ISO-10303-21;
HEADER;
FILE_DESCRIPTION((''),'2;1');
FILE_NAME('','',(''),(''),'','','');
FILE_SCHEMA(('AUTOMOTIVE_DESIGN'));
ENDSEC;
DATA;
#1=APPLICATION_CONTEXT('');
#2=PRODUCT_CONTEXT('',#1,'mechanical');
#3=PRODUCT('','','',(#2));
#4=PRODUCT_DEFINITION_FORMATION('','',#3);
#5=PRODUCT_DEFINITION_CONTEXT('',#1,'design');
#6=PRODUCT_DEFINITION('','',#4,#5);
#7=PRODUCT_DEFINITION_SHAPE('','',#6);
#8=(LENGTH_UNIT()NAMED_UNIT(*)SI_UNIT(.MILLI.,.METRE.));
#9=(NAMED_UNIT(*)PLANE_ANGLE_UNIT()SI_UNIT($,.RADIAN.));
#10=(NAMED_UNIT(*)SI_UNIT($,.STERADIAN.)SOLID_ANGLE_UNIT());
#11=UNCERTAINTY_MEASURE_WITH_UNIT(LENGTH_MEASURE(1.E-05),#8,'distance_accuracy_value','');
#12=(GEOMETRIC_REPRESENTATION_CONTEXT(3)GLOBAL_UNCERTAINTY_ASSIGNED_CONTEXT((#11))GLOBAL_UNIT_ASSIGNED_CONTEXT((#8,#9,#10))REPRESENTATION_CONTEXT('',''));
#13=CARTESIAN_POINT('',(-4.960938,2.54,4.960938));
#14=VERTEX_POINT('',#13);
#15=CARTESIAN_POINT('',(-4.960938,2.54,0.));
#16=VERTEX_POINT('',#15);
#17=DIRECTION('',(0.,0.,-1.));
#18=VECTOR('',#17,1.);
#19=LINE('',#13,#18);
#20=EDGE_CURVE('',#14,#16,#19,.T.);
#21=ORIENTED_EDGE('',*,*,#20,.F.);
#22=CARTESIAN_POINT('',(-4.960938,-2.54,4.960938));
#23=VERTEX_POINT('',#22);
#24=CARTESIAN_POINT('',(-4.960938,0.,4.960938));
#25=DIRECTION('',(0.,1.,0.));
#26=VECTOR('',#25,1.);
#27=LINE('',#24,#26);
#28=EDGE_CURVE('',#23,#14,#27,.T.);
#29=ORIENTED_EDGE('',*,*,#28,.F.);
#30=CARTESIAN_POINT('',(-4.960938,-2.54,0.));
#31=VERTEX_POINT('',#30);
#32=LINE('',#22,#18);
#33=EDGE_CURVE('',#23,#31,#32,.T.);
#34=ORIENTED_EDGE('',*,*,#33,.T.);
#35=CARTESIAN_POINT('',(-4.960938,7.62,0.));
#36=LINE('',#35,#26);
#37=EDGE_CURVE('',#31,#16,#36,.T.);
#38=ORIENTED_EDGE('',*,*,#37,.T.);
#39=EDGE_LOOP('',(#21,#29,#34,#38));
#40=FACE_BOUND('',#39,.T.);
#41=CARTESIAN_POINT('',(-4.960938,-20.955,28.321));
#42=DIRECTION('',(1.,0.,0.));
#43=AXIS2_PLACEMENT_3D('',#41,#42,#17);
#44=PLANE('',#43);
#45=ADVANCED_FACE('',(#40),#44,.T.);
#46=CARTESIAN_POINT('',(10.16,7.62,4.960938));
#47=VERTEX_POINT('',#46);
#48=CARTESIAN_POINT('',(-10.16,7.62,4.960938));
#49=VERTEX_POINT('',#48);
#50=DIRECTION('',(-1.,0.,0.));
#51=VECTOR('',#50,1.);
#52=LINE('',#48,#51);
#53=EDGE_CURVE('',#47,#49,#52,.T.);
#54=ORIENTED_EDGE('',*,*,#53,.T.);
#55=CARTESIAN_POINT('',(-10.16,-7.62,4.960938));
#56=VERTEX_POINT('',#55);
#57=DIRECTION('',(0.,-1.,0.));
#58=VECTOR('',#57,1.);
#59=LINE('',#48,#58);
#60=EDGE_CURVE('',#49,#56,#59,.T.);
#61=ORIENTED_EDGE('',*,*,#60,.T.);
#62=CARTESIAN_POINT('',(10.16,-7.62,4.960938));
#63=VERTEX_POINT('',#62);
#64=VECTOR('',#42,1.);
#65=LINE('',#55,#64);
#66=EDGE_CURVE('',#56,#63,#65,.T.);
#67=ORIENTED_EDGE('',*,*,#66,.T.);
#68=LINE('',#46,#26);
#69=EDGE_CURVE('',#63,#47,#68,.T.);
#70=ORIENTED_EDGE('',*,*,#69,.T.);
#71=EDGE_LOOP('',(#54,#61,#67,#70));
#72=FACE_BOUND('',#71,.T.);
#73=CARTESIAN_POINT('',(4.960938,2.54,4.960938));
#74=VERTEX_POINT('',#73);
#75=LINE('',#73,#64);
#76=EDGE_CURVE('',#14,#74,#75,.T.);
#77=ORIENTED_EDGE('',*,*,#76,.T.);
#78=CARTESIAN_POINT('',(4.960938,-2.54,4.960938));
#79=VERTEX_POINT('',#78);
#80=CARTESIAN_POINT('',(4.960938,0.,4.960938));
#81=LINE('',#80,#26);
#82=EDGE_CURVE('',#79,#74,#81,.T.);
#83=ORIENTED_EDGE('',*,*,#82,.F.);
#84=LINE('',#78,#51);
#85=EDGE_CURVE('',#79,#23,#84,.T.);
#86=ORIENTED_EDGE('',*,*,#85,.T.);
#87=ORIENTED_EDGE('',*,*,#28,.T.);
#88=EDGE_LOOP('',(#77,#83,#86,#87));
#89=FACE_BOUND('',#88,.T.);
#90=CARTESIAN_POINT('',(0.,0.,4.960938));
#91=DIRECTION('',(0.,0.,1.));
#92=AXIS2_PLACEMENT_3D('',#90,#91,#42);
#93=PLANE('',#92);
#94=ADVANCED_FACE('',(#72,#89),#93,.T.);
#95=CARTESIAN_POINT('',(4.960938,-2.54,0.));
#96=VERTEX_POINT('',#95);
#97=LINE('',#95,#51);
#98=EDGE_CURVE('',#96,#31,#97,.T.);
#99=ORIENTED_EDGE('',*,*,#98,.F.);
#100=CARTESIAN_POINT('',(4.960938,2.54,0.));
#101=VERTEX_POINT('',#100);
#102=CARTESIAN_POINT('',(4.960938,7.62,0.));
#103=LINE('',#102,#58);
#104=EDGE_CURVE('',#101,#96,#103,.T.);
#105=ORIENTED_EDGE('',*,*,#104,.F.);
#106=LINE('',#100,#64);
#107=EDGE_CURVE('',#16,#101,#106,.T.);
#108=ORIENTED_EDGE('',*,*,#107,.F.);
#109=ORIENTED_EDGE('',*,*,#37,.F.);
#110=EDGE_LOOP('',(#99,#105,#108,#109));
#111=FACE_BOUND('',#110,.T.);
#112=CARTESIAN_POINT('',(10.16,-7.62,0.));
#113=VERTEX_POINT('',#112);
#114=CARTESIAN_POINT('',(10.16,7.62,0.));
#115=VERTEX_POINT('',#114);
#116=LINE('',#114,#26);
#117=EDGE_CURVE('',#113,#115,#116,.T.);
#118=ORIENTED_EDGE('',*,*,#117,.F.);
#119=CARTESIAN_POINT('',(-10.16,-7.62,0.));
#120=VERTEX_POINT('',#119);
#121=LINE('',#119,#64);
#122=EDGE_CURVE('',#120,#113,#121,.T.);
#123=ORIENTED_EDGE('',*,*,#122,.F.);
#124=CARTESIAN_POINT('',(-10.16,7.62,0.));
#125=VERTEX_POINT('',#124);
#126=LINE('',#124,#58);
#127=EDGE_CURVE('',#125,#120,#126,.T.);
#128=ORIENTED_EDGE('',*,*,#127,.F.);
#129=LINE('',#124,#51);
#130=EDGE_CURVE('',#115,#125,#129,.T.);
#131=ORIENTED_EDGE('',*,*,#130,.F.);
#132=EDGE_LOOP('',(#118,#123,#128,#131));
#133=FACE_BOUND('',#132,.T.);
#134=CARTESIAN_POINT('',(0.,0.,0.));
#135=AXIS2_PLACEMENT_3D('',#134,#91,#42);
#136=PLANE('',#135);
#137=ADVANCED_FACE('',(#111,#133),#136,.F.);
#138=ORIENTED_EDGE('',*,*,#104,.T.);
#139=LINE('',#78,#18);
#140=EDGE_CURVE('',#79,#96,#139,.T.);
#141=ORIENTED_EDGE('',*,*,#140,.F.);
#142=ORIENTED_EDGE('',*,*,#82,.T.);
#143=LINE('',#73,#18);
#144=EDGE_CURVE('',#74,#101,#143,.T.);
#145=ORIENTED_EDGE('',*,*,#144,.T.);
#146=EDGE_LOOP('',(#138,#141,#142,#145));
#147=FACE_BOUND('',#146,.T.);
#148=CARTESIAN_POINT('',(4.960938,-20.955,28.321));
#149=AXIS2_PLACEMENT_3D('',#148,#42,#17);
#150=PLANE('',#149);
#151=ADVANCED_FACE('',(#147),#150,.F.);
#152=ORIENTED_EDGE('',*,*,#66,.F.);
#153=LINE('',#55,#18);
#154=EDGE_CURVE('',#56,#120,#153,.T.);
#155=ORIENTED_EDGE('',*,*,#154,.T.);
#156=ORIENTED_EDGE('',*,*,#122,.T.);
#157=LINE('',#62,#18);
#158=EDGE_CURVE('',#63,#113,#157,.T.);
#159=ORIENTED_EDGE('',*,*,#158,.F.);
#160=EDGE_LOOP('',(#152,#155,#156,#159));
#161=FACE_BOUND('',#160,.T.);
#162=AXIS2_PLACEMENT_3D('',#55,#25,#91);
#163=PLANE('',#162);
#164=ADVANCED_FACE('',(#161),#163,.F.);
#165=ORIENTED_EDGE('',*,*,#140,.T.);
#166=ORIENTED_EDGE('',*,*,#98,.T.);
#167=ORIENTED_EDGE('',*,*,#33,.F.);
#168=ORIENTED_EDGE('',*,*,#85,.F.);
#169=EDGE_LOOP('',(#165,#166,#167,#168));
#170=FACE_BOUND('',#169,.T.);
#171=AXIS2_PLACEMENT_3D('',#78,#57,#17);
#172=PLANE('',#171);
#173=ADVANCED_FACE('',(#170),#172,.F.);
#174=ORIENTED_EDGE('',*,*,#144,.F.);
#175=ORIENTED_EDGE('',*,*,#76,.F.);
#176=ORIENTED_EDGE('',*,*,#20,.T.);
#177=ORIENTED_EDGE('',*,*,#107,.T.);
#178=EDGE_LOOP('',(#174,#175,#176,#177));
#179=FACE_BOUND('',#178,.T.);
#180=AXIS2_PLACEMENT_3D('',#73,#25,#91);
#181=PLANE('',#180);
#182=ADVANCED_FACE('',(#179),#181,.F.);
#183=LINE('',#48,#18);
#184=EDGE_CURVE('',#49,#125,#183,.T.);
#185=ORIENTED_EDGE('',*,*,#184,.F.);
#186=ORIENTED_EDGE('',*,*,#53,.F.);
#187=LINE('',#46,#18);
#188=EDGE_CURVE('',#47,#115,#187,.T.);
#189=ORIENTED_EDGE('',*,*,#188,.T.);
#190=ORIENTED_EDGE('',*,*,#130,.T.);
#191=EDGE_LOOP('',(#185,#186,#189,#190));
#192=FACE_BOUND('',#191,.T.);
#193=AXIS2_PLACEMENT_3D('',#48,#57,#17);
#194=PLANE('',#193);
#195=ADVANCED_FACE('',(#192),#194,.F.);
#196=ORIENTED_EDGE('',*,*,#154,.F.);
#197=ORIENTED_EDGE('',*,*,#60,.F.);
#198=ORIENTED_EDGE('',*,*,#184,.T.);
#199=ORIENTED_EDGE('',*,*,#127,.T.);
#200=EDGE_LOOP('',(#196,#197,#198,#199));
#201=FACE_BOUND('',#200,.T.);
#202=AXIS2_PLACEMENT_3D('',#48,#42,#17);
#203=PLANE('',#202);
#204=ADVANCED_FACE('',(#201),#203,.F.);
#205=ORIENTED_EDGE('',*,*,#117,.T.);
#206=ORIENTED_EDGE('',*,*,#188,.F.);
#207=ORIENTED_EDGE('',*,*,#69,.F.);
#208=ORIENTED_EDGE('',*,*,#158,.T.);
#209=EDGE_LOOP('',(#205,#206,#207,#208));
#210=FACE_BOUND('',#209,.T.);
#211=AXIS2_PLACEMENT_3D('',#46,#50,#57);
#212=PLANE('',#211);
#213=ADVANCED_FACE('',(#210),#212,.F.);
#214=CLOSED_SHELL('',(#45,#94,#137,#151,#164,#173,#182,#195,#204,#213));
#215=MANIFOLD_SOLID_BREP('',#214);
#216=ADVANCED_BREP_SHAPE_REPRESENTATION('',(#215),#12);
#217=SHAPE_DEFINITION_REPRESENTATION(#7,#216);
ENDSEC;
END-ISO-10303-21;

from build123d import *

# Parameters (mm, degrees)
SKETCH1_W           = 20.32
SKETCH1_H           = 15.24
BOSS_EXTRUDE1_DEPTH = 4.9609375
CAVITY1_START       = -4.9609375
CAVITY1_OUTLINE_W   = 5.08
CAVITY1_OUTLINE_H   = 4.9609375
CAVITY1_DEPTH       = 9.921875


# Read off the part's stored shape, not the designer's step: Cavity1
with BuildPart() as part:
    # Sketch1 → Boss-Extrude1 (new body)
    with BuildSketch(Plane.XY):
        Rectangle(SKETCH1_W, SKETCH1_H)
    extrude(amount=BOSS_EXTRUDE1_DEPTH)

    # Cavity1 outline → Cavity1 (cut)
    with BuildSketch(Plane.YZ.offset(CAVITY1_START)):
        with Locations((0, 2.48046875)):
            Rectangle(CAVITY1_OUTLINE_W, CAVITY1_OUTLINE_H)
    extrude(amount=CAVITY1_DEPTH, mode=Mode.SUBTRACT)


solid = part.part
